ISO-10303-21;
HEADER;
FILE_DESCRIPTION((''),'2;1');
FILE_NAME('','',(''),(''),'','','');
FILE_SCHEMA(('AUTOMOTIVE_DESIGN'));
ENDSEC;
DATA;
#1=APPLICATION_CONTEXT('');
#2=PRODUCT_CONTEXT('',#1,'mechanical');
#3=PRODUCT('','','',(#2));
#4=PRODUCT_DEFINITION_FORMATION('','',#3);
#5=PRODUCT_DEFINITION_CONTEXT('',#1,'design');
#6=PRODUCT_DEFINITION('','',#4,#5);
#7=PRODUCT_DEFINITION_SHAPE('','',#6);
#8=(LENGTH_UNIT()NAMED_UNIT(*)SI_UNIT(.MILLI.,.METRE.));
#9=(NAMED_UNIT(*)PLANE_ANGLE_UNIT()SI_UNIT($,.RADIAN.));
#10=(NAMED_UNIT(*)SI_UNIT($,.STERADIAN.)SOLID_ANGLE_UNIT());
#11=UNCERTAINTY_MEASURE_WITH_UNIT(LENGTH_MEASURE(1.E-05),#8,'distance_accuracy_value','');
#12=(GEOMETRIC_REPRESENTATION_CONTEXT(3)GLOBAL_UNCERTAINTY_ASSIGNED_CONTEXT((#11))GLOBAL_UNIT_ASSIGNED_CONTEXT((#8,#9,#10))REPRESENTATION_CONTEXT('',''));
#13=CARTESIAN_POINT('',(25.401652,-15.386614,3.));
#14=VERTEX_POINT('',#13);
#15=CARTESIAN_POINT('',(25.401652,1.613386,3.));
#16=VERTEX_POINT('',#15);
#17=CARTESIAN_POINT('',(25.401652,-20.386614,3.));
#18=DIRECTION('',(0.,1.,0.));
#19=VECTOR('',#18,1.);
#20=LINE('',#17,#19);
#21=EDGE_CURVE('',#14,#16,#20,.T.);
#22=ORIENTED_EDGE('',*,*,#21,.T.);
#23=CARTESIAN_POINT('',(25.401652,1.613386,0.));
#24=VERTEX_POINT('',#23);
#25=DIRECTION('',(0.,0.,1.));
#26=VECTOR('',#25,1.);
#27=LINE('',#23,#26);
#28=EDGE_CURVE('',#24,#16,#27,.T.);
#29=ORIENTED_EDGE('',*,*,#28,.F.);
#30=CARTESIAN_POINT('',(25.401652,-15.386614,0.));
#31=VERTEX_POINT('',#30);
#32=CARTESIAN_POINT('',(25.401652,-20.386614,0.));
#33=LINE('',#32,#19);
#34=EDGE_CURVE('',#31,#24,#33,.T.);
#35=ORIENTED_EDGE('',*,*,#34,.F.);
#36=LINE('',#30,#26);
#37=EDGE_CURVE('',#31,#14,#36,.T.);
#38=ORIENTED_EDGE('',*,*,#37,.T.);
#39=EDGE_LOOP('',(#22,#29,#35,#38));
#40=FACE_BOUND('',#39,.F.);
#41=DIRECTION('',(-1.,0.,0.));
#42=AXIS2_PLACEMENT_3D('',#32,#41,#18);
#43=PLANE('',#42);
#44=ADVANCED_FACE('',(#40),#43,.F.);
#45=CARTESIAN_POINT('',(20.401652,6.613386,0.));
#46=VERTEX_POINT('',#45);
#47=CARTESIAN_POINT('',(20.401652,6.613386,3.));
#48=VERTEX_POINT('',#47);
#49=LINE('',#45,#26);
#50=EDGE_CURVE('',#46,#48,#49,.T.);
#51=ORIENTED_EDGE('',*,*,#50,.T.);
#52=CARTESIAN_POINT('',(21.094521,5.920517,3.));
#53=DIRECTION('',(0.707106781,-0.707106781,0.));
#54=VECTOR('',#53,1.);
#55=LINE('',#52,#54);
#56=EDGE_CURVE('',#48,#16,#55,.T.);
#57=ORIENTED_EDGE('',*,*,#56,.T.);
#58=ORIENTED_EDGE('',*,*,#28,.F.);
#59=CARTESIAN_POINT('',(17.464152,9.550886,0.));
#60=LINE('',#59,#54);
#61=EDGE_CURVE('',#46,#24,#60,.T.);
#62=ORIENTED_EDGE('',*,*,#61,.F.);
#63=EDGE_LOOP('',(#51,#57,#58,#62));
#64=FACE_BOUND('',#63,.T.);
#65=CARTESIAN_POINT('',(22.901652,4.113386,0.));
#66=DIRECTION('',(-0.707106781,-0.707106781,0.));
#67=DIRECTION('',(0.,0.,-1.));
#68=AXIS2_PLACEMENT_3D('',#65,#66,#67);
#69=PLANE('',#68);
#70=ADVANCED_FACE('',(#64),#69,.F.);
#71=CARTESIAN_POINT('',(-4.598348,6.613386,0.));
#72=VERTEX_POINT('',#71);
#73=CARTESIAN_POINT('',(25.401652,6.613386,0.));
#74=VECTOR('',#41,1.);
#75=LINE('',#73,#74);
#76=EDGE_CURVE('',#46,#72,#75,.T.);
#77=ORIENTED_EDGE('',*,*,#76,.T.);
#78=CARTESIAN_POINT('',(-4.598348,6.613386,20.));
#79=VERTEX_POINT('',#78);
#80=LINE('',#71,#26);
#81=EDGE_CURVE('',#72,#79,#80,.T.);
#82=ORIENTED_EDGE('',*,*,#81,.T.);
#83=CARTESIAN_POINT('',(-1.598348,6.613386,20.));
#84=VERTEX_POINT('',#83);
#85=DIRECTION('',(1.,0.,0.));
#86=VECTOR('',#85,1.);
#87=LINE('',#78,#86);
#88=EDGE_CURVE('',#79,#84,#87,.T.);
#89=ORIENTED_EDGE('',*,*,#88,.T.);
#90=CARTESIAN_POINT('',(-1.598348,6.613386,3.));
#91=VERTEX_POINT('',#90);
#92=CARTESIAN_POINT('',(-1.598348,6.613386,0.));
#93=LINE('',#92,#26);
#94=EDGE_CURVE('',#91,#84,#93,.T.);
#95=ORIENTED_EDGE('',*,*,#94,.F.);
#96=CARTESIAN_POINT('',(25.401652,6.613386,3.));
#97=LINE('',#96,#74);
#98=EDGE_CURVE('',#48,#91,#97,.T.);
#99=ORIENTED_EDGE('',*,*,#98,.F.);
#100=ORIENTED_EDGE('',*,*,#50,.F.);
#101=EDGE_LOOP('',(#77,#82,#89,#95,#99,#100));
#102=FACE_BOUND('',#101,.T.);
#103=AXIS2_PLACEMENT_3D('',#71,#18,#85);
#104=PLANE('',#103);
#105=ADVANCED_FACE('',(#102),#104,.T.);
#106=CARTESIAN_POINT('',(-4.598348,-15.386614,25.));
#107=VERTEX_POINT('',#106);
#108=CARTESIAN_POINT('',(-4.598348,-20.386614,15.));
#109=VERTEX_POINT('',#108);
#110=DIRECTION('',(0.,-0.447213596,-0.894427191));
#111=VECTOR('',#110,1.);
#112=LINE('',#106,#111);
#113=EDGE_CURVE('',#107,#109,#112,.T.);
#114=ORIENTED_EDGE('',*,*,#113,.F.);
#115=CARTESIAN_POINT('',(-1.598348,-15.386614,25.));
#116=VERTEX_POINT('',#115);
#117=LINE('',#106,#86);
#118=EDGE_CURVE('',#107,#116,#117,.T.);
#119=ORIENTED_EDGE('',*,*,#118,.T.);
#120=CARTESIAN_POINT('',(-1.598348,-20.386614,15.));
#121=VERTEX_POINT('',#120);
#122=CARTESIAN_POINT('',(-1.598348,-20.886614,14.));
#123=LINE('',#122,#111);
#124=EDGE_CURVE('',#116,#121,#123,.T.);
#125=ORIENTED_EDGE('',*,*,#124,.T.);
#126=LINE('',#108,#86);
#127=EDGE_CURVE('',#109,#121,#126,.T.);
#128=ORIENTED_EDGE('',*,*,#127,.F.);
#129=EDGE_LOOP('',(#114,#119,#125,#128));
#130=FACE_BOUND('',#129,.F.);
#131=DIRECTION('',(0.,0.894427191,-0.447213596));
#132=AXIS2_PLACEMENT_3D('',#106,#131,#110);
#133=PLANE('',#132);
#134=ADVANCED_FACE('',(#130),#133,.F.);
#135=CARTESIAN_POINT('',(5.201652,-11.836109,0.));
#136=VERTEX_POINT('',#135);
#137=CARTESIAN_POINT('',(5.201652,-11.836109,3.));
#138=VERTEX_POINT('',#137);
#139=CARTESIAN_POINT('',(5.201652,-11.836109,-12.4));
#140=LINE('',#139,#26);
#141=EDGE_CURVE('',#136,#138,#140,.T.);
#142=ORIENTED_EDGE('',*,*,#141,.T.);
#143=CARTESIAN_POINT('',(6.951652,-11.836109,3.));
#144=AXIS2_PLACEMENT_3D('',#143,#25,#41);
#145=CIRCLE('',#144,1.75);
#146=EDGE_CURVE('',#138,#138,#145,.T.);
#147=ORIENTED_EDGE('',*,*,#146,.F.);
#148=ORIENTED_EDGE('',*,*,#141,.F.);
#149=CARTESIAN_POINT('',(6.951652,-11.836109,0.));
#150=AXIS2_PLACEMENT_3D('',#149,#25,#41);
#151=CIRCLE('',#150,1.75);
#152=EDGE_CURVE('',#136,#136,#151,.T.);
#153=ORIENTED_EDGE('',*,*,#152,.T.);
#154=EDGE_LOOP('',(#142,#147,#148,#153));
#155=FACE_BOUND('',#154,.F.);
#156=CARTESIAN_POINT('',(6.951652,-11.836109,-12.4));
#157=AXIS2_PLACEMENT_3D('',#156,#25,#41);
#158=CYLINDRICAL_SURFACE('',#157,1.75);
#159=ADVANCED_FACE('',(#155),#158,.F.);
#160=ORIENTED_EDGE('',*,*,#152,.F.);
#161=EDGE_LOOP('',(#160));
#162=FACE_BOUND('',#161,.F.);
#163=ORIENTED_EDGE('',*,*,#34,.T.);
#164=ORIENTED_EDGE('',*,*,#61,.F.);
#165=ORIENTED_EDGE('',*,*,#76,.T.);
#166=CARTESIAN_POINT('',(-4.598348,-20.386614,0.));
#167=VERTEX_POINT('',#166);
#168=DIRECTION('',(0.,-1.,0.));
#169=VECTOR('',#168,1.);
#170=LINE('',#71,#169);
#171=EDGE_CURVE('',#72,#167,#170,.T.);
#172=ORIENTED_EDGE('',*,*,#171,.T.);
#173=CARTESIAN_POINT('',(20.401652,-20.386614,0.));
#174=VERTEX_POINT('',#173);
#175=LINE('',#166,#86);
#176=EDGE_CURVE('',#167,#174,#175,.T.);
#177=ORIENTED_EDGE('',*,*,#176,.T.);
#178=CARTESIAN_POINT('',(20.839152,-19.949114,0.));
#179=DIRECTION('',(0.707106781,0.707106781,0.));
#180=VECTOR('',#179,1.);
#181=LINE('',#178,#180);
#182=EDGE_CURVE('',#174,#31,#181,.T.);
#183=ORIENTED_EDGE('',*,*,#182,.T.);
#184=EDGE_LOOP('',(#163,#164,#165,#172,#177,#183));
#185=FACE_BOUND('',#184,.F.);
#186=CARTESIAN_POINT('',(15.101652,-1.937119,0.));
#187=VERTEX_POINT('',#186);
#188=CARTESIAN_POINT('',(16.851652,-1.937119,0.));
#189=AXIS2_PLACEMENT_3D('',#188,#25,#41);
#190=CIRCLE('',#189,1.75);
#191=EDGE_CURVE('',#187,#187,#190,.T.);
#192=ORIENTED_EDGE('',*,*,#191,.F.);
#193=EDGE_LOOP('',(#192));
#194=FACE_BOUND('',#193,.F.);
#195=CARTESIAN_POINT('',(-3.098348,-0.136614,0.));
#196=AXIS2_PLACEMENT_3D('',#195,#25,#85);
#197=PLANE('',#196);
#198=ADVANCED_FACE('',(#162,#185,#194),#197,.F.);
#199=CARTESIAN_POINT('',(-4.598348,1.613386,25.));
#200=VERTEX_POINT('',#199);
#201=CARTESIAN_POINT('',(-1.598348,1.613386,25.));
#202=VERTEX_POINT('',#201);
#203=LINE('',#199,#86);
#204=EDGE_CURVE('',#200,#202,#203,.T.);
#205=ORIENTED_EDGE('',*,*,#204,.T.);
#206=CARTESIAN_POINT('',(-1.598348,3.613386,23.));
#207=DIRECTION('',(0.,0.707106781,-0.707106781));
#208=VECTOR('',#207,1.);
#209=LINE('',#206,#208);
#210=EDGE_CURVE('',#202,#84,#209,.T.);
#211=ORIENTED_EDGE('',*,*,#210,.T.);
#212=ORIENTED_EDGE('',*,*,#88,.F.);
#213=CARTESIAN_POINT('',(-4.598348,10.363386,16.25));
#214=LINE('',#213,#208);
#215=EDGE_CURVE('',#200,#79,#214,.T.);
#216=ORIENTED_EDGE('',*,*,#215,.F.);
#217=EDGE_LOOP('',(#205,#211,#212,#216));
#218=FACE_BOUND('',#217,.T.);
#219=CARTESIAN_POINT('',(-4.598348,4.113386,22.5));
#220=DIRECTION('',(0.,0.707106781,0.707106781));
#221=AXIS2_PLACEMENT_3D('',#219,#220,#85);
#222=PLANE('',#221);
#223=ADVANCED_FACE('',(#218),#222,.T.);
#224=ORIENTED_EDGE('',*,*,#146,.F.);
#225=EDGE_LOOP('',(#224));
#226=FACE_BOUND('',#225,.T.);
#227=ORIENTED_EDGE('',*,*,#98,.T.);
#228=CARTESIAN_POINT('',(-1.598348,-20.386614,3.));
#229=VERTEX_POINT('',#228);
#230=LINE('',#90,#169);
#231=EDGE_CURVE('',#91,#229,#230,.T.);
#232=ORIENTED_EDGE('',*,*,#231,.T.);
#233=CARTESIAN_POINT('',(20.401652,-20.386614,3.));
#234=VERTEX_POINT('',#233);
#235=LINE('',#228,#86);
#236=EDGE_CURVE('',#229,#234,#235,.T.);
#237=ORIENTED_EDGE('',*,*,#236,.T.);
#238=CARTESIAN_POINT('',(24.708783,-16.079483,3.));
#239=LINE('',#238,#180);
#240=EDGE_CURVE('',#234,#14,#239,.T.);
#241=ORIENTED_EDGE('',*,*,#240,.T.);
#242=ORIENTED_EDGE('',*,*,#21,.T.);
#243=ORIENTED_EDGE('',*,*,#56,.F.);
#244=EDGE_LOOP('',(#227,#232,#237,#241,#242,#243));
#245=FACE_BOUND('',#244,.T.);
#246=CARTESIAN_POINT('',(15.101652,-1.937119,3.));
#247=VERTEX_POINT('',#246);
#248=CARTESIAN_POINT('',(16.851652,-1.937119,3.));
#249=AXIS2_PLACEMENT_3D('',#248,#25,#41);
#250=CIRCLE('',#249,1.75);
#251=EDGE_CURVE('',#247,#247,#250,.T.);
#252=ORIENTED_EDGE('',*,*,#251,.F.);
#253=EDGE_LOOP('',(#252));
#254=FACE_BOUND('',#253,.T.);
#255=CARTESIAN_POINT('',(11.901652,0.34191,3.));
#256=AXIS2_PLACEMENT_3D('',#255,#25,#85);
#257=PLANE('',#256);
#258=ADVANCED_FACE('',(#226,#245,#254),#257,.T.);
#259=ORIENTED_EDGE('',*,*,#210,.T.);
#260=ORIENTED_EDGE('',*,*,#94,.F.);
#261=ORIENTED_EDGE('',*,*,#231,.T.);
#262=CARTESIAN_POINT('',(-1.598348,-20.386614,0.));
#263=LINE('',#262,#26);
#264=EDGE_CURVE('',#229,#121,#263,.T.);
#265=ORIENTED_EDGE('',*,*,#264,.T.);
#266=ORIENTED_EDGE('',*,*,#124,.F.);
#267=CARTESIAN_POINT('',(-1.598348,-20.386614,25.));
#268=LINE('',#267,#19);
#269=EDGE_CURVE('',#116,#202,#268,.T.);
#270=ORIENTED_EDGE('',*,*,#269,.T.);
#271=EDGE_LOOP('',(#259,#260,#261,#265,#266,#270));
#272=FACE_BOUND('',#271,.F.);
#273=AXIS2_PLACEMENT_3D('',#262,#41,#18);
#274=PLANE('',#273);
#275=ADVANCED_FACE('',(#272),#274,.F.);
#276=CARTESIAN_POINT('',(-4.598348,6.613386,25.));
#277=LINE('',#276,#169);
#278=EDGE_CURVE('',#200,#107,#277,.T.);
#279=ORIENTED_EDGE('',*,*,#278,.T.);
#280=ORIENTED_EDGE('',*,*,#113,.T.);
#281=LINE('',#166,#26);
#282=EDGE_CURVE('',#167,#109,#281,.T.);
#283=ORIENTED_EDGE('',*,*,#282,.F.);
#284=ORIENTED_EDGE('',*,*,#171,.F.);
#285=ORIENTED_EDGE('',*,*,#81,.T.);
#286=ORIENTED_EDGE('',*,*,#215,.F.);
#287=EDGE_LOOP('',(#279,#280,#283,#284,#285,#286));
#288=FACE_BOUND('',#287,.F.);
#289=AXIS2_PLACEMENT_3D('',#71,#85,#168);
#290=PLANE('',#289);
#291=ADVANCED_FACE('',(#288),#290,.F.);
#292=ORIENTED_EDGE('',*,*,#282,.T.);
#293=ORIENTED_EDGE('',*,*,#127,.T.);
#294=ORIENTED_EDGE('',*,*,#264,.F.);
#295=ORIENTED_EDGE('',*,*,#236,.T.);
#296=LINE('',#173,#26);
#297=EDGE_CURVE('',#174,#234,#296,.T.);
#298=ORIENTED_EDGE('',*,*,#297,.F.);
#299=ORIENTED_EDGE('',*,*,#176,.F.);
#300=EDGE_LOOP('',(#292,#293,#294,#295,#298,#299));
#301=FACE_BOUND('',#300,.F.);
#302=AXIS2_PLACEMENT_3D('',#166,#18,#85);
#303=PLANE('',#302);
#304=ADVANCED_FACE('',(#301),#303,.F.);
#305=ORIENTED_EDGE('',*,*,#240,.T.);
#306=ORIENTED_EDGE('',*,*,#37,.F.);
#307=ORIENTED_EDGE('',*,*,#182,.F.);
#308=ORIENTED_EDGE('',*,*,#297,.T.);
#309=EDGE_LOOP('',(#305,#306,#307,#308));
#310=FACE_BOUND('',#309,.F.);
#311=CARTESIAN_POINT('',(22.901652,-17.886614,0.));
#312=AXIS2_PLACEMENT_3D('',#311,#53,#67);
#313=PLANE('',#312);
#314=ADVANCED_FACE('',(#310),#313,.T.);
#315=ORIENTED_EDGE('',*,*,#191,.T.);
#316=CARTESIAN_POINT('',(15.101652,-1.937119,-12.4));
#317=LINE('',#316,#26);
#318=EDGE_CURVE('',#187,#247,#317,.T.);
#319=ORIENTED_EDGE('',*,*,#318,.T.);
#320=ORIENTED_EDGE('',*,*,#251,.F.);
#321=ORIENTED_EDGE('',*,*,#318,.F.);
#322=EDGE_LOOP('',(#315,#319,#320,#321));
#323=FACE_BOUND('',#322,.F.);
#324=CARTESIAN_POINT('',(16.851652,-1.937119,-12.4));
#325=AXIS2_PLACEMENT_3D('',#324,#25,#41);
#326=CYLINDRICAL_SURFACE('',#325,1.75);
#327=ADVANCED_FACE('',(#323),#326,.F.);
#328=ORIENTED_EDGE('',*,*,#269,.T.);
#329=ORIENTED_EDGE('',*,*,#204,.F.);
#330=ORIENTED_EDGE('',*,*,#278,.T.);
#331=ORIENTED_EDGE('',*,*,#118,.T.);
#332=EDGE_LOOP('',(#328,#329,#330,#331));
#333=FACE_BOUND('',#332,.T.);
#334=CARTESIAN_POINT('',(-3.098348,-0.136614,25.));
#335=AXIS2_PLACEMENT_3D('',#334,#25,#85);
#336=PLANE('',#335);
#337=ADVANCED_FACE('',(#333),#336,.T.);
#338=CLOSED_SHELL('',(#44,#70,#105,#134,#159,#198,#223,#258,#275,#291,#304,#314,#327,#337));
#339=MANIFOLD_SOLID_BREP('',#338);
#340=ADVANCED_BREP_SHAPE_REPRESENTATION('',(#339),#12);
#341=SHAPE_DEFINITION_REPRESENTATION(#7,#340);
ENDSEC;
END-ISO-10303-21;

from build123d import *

# Parameters (mm, degrees)
F0_W     = 9.9
F0_H     = 4.9494949237
F1_DEPTH = 3
F0_W_2   = 3
F0_H_2   = 13.5
F2_DEPTH = 25
F3_D     = 3.5
F3_DEPTH = 12.4
F3_TIP   = 1.0515060833
F5_DEPTH = 30.001
F6_SIZE  = 5


# Not quite as in the source:
# - a feature names something its author has since deleted; it is built from what else it names


with BuildPart() as f1:
    # F0 (on Top) → F1 (new body)
    with BuildSketch(Plane.XY):
        with BuildLine():
            Line((25.4016518593, 6.6133860946), (-1.5983481407, 6.6133860946))
            Line((-1.5983481407, 6.6133860946), (-1.5983481407, -6.8866139054))
            Line((-1.5983481407, -6.8866139054), (4.9016518593, -6.8866139054))
            ThreePointArc((4.9016518593, -6.8866139054), (5.4344267975, -4.2079948582), (6.9516518593, -1.9371189817))
            ThreePointArc((6.9516518593, -1.9371189817), (11.9016518593, 0.1133860946), (16.8516518593, -1.9371189817))
            ThreePointArc((16.8516518593, -1.9371189817), (18.3688769211, -4.2079948582), (18.9016518593, -6.8866139054))
            Line((18.9016518593, -6.8866139054), (25.4016518593, -6.8866139054))
            Line((25.4016518593, -6.8866139054), (25.4016518593, 6.6133860946))
        make_face()
        with BuildLine():
            Line((4.9016518593, -6.8866139054), (-1.5983481407, -6.8866139054))
            Line((-1.5983481407, -6.8866139054), (-1.5983481407, -20.3866139054))
            Line((-1.5983481407, -20.3866139054), (25.4016518593, -20.3866139054))
            Line((25.4016518593, -20.3866139054), (25.4016518593, -6.8866139054))
            Line((25.4016518593, -6.8866139054), (18.9016518593, -6.8866139054))
            ThreePointArc((18.9016518593, -6.8866139054), (18.3688769211, -9.5652329526), (16.8516518593, -11.8361088292))
            ThreePointArc((16.8516518593, -11.8361088292), (11.9016518593, -13.8866139054), (6.9516518593, -11.8361088292))
            ThreePointArc((6.9516518593, -11.8361088292), (5.4344267975, -9.5652329526), (4.9016518593, -6.8866139054))
        make_face()
        with BuildLine():
            ThreePointArc((16.8516518593, -1.9371189817), (11.9016518593, 0.1133860946), (6.9516518593, -1.9371189817))
            Line((6.9516518593, -1.9371189817), (16.8516518593, -1.9371189817))
        make_face()
        with BuildLine():
            ThreePointArc((6.9516518593, -1.9371189817), (5.4344267975, -4.2079948582), (4.9016518593, -6.8866139054))
            Line((4.9016518593, -6.8866139054), (6.9516518593, -6.8866139054))
            Line((6.9516518593, -6.8866139054), (6.9516518593, -1.9371189817))
        make_face()
        with Locations((11.9016518593, -4.4118664436)):
            Rectangle(F0_W, F0_H)
        with BuildLine():
            Line((16.8516518593, -6.8866139054), (18.9016518593, -6.8866139054))
            ThreePointArc((18.9016518593, -6.8866139054), (18.3688769211, -4.2079948582), (16.8516518593, -1.9371189817))
            Line((16.8516518593, -1.9371189817), (16.8516518593, -6.8866139054))
        make_face()
        with BuildLine():
            ThreePointArc((16.8516518593, -11.8361088292), (18.3688769211, -9.5652329526), (18.9016518593, -6.8866139054))
            Line((18.9016518593, -6.8866139054), (16.8516518593, -6.8866139054))
            Line((16.8516518593, -6.8866139054), (16.8516518593, -11.8361088292))
        make_face()
        with Locations((11.9016518593, -9.3613613673)):
            Rectangle(F0_W, F0_H)
        with BuildLine():
            Line((6.9516518593, -6.8866139054), (4.9016518593, -6.8866139054))
            ThreePointArc((4.9016518593, -6.8866139054), (5.4344267975, -9.5652329526), (6.9516518593, -11.8361088292))
            Line((6.9516518593, -11.8361088292), (6.9516518593, -6.8866139054))
        make_face()
        with BuildLine():
            Line((16.8516518593, -11.8361088292), (6.9516518593, -11.8361088292))
            ThreePointArc((6.9516518593, -11.8361088292), (11.9016518593, -13.8866139054), (16.8516518593, -11.8361088292))
        make_face()
    extrude(amount=F1_DEPTH)

    # F0 (on Top) → F2 (join)
    with BuildSketch(Plane.XY):
        with Locations((-3.0983481407, -0.1366139054)):
            Rectangle(F0_W_2, F0_H_2)
        with Locations((-3.0983481407, -13.6366139054)):
            Rectangle(F0_W_2, F0_H_2)
    extrude(amount=F2_DEPTH)

    # F3
    with Locations(Plane(origin=(0, 0, 0), x_dir=(1, 0, 0), z_dir=(0, 0, -1))):
        with Locations((16.8516518593, 1.9371189817), (6.9516518593, 11.8361088292)):
            Hole(F3_D / 2, depth=F3_DEPTH)
            with Locations((0, 0, -(F3_DEPTH + F3_TIP / 2))):  # 118° drill point
                Cone(0, F3_D / 2, F3_TIP, mode=Mode.SUBTRACT)

    # F4 (on face) → F5 (cut, through all)
    with BuildSketch(Plane(origin=(-4.5983481407, 0, 0), x_dir=(0, -1, 0), z_dir=(-1, 0, 0))):
        Polygon((20.3866139054, 25), (15.3866139054, 25), (20.3866139054, 15), align=None)
    extrude(amount=-F5_DEPTH, mode=Mode.SUBTRACT)

    # F6
    f6_edges = [f1.edges().sort_by_distance(p)[0] for p in [
        (25.401652, -20.386614, 1.5),
        (25.401652, 6.613386, 1.5),
        (-3.098348, 6.613386, 25),
    ]]
    chamfer(f6_edges, length=F6_SIZE)


solid = f1.part
